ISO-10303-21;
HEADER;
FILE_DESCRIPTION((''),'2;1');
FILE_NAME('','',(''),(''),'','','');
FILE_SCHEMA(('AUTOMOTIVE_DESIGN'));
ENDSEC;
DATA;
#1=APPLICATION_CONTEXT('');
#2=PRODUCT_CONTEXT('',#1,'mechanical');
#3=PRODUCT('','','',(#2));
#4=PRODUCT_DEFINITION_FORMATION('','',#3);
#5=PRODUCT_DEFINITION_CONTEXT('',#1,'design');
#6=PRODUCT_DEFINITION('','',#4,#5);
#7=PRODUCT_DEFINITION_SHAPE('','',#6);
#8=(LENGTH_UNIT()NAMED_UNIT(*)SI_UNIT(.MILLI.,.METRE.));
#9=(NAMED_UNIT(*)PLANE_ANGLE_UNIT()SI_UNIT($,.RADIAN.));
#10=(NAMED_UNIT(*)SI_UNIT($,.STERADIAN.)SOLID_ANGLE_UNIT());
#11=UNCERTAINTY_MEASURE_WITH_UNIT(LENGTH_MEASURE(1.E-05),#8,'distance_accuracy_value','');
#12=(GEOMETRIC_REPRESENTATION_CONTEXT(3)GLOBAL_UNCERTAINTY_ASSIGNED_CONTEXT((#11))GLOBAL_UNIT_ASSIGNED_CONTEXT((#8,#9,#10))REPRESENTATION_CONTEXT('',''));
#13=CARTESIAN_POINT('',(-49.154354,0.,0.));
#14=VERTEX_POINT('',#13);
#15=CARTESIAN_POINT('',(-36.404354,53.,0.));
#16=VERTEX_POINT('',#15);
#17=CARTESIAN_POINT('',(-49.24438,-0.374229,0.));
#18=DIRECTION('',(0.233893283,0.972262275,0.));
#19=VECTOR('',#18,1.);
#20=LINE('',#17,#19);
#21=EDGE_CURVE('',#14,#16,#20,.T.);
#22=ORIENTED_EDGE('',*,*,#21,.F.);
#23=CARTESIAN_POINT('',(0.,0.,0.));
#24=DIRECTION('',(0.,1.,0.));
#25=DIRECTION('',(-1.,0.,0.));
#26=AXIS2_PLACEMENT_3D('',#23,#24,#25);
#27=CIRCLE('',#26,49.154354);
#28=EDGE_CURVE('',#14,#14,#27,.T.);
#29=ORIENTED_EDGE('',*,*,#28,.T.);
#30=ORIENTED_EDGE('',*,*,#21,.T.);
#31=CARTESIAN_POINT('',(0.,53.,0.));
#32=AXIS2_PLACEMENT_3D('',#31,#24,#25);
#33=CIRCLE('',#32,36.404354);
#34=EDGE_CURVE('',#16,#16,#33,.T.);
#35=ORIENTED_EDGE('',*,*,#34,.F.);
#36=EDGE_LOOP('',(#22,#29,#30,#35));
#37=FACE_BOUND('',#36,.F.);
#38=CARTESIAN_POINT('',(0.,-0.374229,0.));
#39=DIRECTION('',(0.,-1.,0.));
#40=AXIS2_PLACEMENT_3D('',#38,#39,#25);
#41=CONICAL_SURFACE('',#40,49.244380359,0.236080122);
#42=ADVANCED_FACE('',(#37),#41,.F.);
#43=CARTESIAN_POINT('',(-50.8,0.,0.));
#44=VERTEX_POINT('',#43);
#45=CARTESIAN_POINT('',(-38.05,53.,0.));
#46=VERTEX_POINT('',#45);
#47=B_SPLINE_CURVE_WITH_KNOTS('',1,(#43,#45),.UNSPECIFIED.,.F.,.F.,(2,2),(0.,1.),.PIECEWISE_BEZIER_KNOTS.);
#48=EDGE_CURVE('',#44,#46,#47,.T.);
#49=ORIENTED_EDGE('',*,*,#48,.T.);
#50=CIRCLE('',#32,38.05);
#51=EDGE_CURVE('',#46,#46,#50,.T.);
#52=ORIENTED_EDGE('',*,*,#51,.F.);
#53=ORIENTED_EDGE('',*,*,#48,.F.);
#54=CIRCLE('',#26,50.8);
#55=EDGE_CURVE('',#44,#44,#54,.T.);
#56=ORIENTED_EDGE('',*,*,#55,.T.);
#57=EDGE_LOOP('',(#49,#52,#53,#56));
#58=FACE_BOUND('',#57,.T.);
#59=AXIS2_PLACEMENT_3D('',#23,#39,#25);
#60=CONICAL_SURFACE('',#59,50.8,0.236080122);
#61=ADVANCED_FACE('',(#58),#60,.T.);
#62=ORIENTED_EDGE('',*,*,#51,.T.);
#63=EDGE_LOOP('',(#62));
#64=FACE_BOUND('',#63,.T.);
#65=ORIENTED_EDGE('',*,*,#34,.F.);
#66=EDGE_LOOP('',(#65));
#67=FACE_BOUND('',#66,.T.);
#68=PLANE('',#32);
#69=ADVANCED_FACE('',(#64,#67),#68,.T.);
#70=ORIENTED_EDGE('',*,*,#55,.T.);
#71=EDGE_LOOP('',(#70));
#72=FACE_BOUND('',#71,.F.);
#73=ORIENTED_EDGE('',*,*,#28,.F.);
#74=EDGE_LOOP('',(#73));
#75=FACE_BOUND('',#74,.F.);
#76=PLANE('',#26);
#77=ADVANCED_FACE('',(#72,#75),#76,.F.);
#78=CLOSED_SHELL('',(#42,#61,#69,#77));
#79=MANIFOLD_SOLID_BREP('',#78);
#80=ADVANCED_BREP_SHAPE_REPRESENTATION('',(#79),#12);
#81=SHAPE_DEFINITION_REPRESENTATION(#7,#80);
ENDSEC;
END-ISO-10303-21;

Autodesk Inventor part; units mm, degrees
ref_plane "YZ Plane" through (0, 0, 0) normal (1, 0, 0) x (0, 1, 0)
ref_plane "XY Plane" through (0, 0, 0) normal (0, 0, 1) x (1, 0, 0)
sketch "Szkic6" plane through (0, 0, 0) normal (0, 1, 0) x (-1, 0, 0)
  circle A0 centre (0, 0) radius 50.8
  dimension "d33" = 101.6
ref_plane "Płaszczyzna konstrukcyjna1" through (0, 53, 0) normal (0, 1, 0) x (-1, 0, 0)
sketch "Szkic7" plane through (0, 53, 0) normal (0, 1, 0) x (-1, 0, 0)
  circle A0 centre (0, 0) radius 38.05
  dimension "d35" = 76.1
loft "Wyciągnięcie złożone1" add profiles "Szkic6", "Szkic7"
shell "Skorupa1" thickness 1.6 removed faces 2 at (-5.8996, 53, 7.9079) at (7.3018, 0, 11.5135)
equation "\"d33\" = OD1"
equation "\"d35\" = OD2"
equation "\"d52\" = THK"
equation "\"SzerokośćGięciaPodcięcia\" = Grubość"
equation "\"RozmiarPodcięciaNarożnika\" = 4 * Grubość"
equation "\"PromieńPrzejścia\" = PromieńGięcia"
equation "\"Rozmiar_promienia_Jacobiego\" = PromieńGięcia"
equation "\"Wielk_odstępu\" = Grubość"
equation "\"d2\" = PromieńGięcia"
equation "\"d23\" = PromieńGięcia"
equation "\"OD1\" = 101.6"
equation "\"OD2\" = 76.1"
equation "\"L\" = 53"
equation "\"THK\" = 1.6"
equation "\"d34\" = L"
equation "\"Grubość\" = 1.5"
equation "\"PromieńGięcia\" = 3"
properties part number "Redukcja symetryczna Ø101,6x76,1x1,6 L=53" material "304"
